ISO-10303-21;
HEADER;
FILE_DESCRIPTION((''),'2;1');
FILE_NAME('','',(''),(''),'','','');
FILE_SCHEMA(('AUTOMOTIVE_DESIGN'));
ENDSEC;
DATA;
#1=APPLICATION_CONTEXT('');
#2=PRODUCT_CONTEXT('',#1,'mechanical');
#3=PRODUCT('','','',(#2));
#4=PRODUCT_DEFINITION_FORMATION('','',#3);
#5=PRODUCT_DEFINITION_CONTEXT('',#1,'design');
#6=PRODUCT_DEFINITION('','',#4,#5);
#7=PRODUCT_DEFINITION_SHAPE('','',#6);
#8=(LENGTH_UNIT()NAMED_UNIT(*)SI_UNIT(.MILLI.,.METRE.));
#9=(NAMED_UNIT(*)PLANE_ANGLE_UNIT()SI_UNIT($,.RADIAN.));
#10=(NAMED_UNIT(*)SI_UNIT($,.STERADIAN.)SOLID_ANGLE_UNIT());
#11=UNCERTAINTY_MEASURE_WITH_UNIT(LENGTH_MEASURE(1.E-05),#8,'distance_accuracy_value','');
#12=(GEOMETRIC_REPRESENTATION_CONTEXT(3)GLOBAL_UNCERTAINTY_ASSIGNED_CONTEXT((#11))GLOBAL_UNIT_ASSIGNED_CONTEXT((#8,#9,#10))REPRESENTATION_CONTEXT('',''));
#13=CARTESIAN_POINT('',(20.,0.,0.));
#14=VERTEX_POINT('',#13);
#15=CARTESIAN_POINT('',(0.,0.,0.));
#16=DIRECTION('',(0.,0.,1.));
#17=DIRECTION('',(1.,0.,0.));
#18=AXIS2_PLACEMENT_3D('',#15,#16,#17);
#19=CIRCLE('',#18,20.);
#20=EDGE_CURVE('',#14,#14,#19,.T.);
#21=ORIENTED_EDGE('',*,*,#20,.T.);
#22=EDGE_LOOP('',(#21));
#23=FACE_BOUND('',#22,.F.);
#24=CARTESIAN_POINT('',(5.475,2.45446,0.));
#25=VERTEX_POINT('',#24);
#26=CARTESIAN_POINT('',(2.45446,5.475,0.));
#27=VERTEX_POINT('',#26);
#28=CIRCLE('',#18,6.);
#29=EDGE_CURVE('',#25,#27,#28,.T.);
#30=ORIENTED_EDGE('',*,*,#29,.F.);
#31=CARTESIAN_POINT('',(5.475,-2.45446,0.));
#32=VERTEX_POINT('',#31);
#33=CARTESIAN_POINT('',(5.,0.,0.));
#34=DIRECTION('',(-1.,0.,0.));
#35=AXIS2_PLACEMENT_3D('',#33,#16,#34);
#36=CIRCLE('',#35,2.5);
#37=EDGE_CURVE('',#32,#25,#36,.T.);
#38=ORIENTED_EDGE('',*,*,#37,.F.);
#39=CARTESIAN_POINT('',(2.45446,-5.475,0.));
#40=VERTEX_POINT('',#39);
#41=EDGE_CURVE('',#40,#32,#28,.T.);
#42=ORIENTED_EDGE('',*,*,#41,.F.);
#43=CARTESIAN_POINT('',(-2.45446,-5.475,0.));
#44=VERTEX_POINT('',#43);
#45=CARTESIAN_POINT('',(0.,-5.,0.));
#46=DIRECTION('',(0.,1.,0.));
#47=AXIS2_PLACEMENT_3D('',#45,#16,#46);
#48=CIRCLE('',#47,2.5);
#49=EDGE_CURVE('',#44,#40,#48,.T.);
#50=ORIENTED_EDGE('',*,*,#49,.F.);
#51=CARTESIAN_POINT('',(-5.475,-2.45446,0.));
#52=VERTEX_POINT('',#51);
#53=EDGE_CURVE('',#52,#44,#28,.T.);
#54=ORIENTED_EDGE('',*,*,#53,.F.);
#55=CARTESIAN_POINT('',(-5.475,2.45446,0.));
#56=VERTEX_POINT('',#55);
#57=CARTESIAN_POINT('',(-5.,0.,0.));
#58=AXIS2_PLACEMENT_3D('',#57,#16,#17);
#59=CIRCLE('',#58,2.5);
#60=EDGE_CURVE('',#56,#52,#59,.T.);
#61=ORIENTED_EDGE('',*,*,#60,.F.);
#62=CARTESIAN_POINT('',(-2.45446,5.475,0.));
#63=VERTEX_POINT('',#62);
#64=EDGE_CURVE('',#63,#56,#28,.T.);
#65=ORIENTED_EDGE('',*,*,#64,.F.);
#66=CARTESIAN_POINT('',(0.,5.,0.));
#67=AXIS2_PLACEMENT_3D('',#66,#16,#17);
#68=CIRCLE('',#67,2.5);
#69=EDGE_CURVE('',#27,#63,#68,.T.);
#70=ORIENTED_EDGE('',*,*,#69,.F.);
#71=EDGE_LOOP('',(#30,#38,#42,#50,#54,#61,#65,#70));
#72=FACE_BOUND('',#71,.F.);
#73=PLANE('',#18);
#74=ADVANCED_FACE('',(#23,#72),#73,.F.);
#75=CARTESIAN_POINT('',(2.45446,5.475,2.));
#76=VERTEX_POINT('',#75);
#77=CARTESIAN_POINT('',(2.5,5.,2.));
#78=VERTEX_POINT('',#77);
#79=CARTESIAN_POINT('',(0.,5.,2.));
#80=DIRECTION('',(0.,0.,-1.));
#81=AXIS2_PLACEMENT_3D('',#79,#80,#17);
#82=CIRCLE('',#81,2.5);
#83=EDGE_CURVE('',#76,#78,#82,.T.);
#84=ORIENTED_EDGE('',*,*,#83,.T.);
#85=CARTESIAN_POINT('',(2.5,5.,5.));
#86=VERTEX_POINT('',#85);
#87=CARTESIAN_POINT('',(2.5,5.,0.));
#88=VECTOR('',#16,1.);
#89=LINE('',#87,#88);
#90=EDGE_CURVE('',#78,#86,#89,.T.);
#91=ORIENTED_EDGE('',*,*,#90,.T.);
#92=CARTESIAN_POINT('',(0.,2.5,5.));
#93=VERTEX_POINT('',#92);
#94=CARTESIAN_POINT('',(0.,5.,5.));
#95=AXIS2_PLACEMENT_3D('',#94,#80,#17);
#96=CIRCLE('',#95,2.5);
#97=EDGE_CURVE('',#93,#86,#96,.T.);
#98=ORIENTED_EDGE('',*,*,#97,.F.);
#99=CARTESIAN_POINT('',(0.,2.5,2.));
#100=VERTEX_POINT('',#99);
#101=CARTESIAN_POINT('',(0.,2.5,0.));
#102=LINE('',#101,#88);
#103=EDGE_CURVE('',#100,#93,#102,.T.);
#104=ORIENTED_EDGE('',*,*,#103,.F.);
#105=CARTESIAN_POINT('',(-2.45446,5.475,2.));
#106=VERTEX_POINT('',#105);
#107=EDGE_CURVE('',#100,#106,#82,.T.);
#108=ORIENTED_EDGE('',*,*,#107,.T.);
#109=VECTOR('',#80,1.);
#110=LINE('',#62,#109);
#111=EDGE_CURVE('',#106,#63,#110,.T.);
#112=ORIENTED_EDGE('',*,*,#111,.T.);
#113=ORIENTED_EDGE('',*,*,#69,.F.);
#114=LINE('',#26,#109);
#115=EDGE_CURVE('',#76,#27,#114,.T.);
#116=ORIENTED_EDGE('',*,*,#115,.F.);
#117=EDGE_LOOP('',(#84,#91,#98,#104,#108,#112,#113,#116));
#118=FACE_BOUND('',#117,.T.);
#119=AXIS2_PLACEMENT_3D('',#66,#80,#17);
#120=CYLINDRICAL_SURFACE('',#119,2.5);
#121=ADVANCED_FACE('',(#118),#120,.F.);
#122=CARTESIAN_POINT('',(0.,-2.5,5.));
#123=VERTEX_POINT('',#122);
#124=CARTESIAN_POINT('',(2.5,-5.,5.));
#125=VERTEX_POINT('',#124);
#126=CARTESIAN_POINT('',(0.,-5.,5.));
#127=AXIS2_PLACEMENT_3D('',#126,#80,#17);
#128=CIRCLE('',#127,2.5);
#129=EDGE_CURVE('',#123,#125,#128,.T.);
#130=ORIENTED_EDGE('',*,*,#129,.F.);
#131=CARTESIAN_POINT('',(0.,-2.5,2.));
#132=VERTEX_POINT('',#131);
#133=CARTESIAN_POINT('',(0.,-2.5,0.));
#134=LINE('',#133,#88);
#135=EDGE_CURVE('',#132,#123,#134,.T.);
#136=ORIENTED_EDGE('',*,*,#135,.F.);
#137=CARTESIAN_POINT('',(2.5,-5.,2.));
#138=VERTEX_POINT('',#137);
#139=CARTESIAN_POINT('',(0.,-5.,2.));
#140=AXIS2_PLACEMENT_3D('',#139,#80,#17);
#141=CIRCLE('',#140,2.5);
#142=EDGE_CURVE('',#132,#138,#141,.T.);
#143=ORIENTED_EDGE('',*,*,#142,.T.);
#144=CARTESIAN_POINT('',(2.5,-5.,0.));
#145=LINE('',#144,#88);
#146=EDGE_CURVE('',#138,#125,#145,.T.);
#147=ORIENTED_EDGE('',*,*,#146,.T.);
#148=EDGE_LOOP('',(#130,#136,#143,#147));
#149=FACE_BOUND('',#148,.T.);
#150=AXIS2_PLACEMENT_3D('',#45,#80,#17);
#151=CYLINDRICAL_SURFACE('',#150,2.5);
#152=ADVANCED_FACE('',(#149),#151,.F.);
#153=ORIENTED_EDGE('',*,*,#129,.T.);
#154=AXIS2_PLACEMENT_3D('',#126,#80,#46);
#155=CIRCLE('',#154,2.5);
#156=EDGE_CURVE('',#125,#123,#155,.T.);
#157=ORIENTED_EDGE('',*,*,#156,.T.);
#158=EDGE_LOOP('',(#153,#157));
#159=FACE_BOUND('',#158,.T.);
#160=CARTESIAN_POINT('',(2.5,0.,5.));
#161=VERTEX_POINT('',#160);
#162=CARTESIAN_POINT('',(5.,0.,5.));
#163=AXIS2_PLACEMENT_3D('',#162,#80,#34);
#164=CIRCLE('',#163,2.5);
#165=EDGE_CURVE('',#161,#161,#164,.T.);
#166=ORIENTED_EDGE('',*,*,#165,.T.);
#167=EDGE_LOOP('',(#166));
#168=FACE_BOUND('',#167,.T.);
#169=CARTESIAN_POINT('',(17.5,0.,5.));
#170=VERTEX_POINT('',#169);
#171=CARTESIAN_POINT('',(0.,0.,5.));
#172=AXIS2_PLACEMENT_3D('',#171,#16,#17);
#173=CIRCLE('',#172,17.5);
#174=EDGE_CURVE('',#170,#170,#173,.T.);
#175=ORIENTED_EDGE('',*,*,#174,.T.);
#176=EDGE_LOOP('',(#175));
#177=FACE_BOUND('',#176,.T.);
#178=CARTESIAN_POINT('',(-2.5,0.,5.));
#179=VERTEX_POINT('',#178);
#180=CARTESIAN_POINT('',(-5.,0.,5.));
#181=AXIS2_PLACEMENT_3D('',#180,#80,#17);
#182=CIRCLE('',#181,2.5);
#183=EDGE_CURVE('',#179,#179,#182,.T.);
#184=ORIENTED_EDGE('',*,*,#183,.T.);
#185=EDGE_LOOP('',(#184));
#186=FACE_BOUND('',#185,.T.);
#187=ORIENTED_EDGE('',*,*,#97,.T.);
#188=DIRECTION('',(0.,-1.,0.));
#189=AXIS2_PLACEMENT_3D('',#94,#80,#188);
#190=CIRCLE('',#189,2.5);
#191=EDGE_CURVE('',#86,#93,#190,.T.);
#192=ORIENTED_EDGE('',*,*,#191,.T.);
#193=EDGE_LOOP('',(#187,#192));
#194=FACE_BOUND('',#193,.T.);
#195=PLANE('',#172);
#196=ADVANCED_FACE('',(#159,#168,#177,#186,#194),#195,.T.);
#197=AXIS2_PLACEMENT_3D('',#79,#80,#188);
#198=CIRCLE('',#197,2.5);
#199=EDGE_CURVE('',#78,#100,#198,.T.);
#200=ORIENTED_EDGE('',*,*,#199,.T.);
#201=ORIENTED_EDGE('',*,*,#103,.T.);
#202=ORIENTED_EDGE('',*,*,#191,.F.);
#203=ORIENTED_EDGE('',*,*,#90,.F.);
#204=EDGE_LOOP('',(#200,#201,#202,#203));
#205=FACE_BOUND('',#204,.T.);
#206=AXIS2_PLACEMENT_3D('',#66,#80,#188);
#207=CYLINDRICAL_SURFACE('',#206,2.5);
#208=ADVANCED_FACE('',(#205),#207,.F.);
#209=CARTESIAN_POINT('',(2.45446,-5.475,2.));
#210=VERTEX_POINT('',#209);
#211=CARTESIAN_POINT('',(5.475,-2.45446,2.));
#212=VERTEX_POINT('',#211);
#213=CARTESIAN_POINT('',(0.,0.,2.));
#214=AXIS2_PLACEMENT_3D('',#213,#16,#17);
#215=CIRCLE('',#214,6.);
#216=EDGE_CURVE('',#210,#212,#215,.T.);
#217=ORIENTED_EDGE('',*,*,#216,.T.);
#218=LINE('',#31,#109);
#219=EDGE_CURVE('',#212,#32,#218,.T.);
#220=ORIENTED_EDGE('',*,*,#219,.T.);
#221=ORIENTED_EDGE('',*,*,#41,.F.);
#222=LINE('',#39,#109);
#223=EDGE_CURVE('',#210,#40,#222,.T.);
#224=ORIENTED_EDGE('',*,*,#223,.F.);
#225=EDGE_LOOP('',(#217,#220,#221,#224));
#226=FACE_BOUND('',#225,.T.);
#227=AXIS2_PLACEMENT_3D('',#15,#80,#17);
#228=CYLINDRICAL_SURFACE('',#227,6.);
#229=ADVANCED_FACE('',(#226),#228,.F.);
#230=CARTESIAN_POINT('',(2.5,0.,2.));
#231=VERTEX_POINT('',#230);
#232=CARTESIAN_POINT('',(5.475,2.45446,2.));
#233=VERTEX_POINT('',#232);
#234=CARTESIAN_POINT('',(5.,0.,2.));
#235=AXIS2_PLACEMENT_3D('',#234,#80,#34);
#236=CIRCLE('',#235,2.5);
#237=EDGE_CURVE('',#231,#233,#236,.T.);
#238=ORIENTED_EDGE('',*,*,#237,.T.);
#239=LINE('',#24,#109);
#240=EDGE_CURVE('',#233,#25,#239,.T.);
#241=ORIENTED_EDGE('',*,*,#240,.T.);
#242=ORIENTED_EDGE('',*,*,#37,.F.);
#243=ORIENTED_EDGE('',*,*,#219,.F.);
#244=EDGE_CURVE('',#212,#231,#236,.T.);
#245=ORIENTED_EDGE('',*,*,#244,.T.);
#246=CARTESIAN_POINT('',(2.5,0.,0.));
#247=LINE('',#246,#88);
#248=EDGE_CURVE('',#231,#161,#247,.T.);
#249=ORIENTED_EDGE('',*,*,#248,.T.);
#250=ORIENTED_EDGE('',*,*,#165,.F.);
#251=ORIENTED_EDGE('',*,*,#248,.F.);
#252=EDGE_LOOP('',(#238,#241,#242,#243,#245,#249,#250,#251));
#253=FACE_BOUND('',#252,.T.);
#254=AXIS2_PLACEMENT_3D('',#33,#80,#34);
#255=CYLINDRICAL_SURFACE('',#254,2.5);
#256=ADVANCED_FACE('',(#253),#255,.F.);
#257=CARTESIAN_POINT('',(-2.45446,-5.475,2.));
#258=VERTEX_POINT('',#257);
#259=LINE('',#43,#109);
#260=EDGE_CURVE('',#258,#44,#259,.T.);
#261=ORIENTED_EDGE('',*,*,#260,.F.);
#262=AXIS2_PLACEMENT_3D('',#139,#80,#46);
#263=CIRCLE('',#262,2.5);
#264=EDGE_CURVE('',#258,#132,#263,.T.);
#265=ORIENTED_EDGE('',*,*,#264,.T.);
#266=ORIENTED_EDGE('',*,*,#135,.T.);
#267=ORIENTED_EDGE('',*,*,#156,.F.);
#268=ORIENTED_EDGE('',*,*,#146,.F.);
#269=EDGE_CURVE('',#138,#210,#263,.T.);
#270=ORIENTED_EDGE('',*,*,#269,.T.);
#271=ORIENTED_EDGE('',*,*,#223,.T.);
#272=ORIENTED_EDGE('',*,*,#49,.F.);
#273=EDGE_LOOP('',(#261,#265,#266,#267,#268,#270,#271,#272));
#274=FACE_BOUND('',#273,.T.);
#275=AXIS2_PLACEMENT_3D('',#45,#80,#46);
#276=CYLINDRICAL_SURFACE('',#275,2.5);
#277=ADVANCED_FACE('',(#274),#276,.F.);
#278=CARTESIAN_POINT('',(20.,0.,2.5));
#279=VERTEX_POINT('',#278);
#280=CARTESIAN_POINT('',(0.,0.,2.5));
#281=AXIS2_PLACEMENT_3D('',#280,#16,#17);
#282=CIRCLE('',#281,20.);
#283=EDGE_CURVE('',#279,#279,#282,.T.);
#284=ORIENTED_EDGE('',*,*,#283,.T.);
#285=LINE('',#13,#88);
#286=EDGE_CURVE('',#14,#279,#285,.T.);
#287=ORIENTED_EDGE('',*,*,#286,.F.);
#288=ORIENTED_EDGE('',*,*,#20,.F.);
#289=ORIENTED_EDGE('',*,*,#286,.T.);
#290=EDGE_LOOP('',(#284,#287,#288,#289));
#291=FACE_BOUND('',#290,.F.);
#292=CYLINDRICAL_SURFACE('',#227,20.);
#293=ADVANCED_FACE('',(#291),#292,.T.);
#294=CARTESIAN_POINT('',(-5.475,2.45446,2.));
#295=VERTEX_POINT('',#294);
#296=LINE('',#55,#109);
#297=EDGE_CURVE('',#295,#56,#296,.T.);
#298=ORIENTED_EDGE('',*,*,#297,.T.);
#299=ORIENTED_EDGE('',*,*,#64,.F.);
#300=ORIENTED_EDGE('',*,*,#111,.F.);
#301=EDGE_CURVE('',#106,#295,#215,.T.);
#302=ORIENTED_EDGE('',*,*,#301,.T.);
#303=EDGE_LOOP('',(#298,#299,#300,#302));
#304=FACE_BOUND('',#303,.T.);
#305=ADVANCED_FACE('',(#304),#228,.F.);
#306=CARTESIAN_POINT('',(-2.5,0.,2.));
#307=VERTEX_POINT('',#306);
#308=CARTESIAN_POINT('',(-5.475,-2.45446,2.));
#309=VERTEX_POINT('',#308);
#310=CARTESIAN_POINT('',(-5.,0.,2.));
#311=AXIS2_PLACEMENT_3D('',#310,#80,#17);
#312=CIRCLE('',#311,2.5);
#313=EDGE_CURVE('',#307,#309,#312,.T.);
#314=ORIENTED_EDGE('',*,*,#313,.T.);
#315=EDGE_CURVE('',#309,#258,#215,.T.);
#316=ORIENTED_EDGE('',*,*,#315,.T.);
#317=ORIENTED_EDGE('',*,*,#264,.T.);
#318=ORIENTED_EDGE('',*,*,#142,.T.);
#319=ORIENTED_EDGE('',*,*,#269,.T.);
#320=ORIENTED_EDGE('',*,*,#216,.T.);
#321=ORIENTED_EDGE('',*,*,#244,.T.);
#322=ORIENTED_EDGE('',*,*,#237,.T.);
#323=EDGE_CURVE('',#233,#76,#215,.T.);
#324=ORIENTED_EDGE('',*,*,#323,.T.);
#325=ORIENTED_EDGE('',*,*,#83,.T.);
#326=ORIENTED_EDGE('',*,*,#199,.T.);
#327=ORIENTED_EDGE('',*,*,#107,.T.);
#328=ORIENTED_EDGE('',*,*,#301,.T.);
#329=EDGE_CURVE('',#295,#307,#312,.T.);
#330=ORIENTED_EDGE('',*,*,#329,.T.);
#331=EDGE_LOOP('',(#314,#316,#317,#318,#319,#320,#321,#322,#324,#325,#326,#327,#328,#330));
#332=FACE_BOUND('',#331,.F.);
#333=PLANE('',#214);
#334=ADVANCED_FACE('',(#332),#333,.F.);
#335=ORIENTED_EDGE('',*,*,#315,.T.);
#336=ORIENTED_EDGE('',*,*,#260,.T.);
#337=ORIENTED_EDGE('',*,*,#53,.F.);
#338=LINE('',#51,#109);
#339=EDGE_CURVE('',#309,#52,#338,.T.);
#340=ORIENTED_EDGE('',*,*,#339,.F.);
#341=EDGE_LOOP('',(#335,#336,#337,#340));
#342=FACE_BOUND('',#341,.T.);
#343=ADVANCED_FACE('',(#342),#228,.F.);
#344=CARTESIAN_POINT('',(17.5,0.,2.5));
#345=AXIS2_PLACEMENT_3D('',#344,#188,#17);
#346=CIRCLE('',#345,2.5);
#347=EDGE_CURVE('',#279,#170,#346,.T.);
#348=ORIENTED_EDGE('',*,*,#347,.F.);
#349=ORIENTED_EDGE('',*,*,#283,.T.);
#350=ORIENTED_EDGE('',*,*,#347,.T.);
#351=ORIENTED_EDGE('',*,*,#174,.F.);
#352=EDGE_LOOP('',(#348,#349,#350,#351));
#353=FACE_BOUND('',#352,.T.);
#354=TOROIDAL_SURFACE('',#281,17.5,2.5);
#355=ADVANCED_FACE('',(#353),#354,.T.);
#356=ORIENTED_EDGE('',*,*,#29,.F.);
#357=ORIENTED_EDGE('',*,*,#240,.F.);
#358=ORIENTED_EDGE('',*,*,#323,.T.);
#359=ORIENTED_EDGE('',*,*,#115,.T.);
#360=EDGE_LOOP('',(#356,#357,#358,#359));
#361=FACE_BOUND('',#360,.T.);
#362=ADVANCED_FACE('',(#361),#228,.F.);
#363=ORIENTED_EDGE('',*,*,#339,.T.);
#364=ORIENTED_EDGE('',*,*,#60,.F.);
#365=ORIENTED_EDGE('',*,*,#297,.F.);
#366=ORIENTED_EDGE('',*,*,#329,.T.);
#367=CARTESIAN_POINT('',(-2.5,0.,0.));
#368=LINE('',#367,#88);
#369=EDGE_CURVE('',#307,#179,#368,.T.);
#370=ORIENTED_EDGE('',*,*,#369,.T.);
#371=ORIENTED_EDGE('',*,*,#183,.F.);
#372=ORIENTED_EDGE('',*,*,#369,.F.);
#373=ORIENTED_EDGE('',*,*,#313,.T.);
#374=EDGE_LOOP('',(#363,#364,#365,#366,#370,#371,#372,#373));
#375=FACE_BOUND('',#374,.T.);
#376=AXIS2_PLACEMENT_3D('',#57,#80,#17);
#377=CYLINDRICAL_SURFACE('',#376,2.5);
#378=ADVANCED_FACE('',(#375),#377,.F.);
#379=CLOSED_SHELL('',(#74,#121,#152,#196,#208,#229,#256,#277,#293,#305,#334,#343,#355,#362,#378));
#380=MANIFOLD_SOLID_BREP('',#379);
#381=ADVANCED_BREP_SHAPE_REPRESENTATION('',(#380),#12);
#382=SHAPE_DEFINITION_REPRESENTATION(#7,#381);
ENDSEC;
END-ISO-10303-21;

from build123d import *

# Parameters (mm, degrees)
F0_R     = 20
F1_DEPTH = 5
F2_R     = 2.5
F3_R     = 2.5
F4_DEPTH = 25
F5_R     = 6
F6_DEPTH = 2


# Not quite as in the source:
# - a feature names something its author has since deleted; it is built from what else it names


with BuildPart() as f1:
    # F0 (on Top) → F1 (new body)
    with BuildSketch(Plane.XY):
        Circle(F0_R)
    extrude(amount=F1_DEPTH)

    # F2
    f2_edges = [f1.edges().sort_by_distance(p)[0] for p in [
        (-20, 0, 5),
    ]]
    fillet(f2_edges, radius=F2_R)

    # F3 (on Top) → F4 (cut)
    with BuildSketch(Plane.XY):
        with BuildLine():
            ThreePointArc((2.5, 5), (-1.767766953, 6.767766953), (0, 2.5))
            ThreePointArc((0, 2.5), (1.767766953, 3.232233047), (2.5, 5))
        make_face()
        with Locations((-5, 0)):
            Circle(F3_R)
        with BuildLine():
            ThreePointArc((2.5, -5), (1.767766953, -3.232233047), (0, -2.5))
            ThreePointArc((0, -2.5), (-1.767766953, -6.767766953), (2.5, -5))
        make_face()
        with BuildLine():
            ThreePointArc((7.5, 0), (5, 2.5), (2.5, 0))
            ThreePointArc((2.5, 0), (5, -2.5), (7.5, 0))
        make_face()
    extrude(amount=F4_DEPTH, mode=Mode.SUBTRACT)

    # F5 (on Top) → F6 (cut)
    with BuildSketch(Plane.XY):
        Circle(F5_R)
    extrude(amount=F6_DEPTH, mode=Mode.SUBTRACT)


solid = f1.part
